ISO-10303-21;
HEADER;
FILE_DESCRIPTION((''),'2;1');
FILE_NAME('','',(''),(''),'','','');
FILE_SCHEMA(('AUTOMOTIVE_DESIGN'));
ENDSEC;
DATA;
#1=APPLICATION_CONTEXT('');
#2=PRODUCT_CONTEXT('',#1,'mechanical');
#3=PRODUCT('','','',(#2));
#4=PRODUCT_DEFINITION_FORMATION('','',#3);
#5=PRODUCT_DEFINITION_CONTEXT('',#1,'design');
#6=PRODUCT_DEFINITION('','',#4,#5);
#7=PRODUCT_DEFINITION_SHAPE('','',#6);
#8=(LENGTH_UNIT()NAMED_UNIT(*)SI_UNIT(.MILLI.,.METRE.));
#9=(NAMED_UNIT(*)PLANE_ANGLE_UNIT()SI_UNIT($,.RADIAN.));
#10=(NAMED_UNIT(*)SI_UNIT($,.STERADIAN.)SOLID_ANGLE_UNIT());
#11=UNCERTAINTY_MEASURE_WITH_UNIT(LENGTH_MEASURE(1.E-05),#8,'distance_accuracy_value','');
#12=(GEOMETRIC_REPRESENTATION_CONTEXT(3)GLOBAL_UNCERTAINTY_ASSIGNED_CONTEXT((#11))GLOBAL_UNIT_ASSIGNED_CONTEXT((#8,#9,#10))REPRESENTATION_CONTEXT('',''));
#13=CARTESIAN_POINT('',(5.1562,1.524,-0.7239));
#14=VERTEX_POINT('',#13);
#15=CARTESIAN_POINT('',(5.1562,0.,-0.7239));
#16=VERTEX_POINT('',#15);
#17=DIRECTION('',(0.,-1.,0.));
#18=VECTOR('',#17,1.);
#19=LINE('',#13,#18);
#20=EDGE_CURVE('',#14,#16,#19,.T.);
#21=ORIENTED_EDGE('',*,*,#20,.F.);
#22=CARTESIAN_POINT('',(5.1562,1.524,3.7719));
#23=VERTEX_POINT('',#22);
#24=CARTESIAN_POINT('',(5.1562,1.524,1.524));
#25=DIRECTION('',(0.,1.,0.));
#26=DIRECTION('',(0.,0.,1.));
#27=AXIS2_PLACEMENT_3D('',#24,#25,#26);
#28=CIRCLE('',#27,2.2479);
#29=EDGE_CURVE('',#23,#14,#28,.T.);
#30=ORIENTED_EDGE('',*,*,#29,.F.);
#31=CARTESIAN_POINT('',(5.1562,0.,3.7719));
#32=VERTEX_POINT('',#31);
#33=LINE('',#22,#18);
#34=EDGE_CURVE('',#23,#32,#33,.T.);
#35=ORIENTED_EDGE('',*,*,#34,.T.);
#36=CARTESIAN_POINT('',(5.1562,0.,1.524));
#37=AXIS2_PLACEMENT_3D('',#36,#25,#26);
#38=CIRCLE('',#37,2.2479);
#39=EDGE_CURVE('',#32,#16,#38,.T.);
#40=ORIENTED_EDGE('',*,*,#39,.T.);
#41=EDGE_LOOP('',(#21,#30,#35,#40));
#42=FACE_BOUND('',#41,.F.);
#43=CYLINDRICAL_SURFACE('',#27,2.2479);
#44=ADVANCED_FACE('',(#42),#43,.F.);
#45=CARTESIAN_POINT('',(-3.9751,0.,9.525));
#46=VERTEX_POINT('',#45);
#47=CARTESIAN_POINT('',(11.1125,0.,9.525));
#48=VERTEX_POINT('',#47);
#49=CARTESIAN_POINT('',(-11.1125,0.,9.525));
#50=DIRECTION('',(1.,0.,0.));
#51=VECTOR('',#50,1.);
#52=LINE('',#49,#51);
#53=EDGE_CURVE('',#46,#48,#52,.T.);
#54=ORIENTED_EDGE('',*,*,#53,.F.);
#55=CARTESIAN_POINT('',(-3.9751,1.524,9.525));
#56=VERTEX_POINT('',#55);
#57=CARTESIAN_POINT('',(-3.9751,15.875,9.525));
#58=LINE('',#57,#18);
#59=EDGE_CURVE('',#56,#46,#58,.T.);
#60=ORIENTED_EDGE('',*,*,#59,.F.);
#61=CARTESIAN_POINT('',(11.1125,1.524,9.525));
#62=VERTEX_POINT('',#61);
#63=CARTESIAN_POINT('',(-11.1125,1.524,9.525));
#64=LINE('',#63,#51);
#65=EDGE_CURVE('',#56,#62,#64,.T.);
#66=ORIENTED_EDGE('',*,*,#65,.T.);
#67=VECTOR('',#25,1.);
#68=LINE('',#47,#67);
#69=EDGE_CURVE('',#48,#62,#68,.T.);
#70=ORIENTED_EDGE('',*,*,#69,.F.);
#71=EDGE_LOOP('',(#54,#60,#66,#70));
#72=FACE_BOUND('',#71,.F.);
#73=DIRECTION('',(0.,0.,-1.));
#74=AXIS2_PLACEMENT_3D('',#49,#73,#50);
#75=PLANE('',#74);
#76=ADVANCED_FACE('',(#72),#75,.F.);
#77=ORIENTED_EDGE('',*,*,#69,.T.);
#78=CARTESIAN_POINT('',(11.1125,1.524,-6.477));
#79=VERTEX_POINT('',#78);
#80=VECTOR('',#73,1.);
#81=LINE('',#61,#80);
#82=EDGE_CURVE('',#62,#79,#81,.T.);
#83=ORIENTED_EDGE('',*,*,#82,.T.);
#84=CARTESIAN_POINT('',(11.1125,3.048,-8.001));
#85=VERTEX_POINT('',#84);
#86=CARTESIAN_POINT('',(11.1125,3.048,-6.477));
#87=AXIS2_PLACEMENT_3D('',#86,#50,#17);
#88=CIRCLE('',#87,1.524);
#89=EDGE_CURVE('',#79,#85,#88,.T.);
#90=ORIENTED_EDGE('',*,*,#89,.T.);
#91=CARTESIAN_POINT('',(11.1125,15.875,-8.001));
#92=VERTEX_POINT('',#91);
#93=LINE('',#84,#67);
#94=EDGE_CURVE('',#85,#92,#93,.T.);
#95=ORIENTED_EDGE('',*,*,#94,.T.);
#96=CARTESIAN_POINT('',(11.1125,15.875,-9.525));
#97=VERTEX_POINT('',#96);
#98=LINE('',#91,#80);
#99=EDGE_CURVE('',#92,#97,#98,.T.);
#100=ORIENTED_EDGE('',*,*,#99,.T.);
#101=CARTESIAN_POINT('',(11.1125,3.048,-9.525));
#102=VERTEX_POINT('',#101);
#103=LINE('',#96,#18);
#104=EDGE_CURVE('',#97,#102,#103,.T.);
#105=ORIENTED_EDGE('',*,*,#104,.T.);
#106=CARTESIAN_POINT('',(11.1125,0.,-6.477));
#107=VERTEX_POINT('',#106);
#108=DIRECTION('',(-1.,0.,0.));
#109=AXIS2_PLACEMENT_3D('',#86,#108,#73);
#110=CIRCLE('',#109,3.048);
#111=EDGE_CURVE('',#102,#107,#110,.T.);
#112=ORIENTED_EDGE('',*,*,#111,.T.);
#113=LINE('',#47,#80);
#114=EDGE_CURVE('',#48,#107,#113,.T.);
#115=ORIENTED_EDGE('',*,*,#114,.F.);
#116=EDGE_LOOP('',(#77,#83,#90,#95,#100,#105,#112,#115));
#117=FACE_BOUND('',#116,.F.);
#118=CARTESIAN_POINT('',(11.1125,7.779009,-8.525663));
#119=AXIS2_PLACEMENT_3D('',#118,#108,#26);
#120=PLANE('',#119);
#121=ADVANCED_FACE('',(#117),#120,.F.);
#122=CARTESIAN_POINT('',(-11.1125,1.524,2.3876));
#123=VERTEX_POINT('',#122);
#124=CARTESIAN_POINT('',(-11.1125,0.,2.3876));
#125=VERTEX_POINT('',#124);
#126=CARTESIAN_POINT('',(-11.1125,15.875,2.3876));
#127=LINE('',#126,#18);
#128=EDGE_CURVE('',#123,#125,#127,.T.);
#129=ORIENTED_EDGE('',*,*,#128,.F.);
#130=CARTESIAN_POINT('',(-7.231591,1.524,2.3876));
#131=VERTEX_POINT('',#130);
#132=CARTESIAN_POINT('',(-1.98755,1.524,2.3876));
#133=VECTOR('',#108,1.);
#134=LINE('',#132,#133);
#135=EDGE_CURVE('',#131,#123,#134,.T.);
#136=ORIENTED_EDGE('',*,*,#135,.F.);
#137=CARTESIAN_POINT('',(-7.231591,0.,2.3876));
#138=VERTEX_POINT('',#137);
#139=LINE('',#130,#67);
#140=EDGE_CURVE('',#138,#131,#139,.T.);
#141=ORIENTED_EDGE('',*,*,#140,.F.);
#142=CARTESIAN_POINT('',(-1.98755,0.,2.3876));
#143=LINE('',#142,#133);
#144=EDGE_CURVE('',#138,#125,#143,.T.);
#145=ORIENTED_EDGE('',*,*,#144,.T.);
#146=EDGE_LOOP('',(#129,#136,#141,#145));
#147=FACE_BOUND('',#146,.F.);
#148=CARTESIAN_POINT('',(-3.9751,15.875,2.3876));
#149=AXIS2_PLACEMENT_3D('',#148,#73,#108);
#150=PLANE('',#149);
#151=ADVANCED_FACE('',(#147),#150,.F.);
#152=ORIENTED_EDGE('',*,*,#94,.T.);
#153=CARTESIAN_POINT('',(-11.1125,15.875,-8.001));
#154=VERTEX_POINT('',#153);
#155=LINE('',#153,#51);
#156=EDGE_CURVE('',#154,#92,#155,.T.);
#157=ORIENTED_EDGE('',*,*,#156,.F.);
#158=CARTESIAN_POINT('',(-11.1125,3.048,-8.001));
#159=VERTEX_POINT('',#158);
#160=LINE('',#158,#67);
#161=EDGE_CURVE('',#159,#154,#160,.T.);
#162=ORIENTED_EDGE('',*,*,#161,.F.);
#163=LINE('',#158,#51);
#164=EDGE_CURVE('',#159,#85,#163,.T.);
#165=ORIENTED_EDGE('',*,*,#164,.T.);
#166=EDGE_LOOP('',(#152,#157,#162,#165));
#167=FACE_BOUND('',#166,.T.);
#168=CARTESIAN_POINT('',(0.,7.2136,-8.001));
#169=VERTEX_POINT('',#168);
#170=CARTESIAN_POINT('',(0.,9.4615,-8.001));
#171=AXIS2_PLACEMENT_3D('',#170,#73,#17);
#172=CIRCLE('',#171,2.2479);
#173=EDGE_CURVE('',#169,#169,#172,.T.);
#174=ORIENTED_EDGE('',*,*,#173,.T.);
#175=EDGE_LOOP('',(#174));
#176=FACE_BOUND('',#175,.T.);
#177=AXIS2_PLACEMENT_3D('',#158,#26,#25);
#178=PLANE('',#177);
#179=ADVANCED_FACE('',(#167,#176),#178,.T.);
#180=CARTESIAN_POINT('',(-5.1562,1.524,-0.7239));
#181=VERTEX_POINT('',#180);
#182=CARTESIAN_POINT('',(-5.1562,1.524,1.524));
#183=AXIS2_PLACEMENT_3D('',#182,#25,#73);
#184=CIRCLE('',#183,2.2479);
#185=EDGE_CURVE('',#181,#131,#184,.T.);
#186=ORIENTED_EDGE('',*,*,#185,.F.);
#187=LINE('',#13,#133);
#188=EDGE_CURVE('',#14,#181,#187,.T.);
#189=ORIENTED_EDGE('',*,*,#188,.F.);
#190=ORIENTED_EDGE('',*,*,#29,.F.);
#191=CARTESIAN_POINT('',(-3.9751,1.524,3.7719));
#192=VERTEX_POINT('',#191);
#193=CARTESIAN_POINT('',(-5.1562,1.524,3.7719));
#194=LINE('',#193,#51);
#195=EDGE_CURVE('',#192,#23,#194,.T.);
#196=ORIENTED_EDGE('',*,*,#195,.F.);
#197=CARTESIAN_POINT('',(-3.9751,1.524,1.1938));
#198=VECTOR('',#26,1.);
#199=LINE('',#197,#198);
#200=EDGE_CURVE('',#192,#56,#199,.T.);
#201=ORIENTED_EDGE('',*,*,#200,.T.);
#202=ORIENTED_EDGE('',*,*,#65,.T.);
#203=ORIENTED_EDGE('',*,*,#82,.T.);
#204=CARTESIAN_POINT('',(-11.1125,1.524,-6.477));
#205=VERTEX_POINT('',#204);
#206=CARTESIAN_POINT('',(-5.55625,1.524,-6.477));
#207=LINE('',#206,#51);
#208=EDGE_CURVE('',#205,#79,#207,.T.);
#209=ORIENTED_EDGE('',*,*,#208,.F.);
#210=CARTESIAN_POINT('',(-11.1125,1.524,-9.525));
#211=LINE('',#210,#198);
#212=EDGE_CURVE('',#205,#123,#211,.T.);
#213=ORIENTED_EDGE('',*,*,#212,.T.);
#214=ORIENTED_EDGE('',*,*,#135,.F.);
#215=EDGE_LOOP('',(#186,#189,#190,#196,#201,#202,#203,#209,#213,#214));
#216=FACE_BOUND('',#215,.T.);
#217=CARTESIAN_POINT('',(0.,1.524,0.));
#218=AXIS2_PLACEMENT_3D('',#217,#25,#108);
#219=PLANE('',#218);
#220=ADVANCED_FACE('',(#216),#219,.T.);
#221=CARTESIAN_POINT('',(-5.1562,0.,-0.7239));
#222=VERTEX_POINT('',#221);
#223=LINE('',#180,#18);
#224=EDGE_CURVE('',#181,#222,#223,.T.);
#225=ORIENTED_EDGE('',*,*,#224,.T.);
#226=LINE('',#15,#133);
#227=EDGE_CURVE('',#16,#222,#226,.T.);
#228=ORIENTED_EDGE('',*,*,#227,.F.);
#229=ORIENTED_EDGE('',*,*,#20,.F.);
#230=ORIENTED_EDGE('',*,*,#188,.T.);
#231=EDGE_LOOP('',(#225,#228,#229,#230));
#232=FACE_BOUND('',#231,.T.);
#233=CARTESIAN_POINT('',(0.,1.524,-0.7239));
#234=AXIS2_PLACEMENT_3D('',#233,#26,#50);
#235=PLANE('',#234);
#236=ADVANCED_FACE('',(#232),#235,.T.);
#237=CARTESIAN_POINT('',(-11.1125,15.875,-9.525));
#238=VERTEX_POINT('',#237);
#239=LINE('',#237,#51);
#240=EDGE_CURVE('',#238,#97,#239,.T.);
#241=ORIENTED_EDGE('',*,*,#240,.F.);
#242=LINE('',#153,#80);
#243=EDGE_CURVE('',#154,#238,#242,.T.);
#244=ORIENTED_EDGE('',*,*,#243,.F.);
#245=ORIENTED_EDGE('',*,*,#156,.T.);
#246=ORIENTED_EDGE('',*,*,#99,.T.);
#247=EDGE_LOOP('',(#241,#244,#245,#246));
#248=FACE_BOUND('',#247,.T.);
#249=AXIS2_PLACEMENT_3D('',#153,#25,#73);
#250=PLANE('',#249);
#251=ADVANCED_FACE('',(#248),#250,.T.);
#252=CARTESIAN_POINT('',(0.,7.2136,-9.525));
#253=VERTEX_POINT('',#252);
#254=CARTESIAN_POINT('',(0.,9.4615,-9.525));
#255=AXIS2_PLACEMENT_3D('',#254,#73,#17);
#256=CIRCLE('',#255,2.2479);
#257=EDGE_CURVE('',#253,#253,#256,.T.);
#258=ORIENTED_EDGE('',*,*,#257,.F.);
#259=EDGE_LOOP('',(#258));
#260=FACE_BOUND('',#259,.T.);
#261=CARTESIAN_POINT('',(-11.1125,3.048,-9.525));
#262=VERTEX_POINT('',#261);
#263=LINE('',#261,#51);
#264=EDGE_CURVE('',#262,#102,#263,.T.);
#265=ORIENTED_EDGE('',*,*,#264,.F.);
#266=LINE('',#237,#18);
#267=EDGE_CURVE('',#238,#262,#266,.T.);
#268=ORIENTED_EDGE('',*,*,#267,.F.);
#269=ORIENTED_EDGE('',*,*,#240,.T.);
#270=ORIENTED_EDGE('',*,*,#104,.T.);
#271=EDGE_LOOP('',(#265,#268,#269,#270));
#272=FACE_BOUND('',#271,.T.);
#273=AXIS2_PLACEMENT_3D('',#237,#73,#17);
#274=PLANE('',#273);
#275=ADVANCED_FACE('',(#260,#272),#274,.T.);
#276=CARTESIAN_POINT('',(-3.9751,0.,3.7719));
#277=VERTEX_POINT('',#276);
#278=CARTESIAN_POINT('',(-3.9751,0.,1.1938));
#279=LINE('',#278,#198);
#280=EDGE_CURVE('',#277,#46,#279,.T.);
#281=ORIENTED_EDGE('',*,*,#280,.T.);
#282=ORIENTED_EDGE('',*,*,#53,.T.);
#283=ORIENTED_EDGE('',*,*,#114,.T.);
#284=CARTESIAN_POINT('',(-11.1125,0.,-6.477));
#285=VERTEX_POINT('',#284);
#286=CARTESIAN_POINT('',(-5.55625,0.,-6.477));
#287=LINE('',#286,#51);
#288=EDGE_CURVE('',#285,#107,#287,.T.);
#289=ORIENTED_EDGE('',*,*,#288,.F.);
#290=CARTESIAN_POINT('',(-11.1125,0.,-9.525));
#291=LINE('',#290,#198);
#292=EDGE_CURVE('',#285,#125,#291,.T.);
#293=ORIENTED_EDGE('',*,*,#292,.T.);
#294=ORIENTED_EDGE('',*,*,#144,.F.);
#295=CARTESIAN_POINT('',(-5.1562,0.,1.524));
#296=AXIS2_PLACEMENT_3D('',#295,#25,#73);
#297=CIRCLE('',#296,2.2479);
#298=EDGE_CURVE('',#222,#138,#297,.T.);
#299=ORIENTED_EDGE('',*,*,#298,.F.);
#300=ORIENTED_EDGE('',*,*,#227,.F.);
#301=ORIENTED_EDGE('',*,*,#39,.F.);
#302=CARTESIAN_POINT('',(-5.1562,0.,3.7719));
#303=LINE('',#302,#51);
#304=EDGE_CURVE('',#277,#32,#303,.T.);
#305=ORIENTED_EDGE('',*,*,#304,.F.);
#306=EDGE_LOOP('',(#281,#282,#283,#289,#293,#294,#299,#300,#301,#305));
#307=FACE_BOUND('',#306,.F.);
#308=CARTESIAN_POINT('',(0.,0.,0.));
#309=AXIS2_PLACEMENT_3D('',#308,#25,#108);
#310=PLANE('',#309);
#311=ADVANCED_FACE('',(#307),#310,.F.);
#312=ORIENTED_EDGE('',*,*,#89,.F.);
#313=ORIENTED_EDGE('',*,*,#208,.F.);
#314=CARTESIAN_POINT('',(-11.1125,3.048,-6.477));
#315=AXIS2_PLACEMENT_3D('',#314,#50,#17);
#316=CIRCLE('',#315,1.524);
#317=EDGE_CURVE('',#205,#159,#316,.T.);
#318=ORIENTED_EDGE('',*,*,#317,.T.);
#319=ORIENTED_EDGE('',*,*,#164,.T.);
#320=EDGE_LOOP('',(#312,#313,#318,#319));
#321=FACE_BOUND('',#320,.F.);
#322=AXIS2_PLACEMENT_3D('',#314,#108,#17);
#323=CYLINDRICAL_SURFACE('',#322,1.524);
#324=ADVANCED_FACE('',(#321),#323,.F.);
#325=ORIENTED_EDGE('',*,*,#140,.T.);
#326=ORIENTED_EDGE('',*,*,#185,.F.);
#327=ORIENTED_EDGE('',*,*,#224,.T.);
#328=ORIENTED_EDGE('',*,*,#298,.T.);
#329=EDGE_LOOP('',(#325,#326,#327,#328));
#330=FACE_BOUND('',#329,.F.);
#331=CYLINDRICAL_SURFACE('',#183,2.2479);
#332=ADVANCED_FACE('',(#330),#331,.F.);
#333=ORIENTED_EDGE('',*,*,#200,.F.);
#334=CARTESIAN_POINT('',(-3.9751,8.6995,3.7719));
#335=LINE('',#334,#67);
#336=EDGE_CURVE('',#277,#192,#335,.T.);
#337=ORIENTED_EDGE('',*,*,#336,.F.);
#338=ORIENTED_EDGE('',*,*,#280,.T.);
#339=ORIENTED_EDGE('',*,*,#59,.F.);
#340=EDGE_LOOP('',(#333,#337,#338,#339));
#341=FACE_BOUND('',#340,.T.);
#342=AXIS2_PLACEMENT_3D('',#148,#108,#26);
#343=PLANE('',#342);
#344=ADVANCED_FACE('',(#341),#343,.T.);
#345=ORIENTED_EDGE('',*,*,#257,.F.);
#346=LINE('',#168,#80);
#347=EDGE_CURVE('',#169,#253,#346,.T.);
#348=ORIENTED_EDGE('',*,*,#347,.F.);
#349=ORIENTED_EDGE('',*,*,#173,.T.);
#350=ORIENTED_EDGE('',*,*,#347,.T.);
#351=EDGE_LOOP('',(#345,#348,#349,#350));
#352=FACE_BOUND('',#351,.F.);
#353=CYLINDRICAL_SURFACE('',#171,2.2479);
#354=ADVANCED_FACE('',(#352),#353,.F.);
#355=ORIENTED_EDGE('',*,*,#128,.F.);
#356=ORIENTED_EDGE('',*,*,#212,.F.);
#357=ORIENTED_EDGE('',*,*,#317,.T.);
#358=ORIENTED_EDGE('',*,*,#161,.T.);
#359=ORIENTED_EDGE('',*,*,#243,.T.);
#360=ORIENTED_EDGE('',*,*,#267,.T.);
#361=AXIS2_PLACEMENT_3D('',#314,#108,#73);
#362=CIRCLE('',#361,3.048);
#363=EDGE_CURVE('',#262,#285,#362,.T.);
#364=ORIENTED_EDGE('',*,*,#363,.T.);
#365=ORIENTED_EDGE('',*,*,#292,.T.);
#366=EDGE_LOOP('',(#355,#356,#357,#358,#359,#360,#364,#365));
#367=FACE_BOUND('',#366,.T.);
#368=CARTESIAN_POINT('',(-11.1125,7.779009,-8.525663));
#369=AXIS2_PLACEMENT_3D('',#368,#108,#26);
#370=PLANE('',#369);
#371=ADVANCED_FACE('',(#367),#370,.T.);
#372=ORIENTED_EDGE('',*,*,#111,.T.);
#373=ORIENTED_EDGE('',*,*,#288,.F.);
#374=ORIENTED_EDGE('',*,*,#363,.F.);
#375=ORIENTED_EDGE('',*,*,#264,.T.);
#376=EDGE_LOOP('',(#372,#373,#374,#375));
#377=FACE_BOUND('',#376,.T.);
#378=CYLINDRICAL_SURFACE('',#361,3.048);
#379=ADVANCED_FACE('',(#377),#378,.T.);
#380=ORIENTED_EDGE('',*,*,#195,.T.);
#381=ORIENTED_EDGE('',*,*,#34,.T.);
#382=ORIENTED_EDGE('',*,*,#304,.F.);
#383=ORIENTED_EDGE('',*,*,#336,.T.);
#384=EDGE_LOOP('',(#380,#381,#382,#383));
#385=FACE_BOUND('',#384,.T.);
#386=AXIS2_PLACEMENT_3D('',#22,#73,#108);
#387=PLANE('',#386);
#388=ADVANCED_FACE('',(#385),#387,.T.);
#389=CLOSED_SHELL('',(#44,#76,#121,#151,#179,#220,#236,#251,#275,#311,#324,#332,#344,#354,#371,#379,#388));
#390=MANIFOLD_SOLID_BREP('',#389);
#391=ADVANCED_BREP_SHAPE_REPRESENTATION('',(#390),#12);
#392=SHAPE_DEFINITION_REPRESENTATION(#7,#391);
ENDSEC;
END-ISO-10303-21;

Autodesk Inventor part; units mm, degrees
ref_plane "YZ Plane" through (0, 0, 0) normal (1, 0, 0) x (0, 1, 0)
ref_plane "XZ Plane" through (0, 0, 0) normal (0, 1, 0) x (-1, 0, 0)
ref_plane "XY Plane" through (0, 0, 0) normal (0, 0, 1) x (1, 0, 0)
sketch "Sketch1" plane through (0, 0, 0) normal (0, 1, 0) x (-1, 0, 0)
  line L0 (11.1125, 9.525) -> (-11.1125, 9.525)
  line L1 (-11.1125, 9.525) -> (-11.1125, -9.525)
  line L2 (-11.1125, -9.525) -> (11.1125, -9.525)
  line L3 (11.1125, -9.525) -> (11.1125, 9.525)
  line L4 (11.1125, 9.525) -> (-11.1125, -9.525) construction
  line L5 (-11.1125, 9.525) -> (11.1125, -9.525) construction
  point P0 (0, 0)
  dimension "d0" = 22.225
  dimension "d1" = 19.05
extrude "Plate1" add sketch "Sketch1" along normal blind 1.524
sketch "Sketch2" plane through (-11.1125, 0, -8.001) normal (0, 0, -1) x (-1, 0, 0)
  line L0 (-22.225, 0) -> (0, 0)
  line L1 (0, 0) -> (0, 15.875)
  line L2 (0, 15.875) -> (-22.225, 15.875)
  line L3 (-22.225, 15.875) -> (-22.225, 0)
edge flange "Flange1" height 15.875 angle 90 thickness 1.524 bend radius 1.524 thickness toward (0, 0, -1) relief tear relief width 1.524 relief depth 0.762 edges at (0, 1.524, -9.525) wall of the first edge with corners at (11.1125, 0, -8.001) (-11.1125, 0, -8.001) (-11.1125, 15.875, -8.001) (11.1125, 15.875, -8.001)
bend "Bend1"
corner "Corner1"
sketch "Sketch3" plane through (0, 1.524, 0) normal (0, 1, 0) x (1, 0, 0)
  line L0 (11.1125, 6.477) -> (-11.1125, 6.477) projected
  line L1 (-11.1125, -9.525) -> (-11.1125, 6.477) projected
  line L2 (11.1125, -9.525) -> (-11.1125, -9.525) projected
  line L3 (11.1125, 6.477) -> (11.1125, -9.525) projected
  line L4 (-11.1125, -1.524) -> (11.1125, -1.524) construction
  line L5 (0, 6.477) -> (0, -9.525) construction
  circle A0 centre (0, -1.524) radius 2.2479
  line L6 (-5.1562, -1.524) -> (5.1562, -1.524) construction
  line L7 (-5.1562, 0.7239) -> (5.1562, 0.7239)
  line L8 (5.1562, -3.7719) -> (-5.1562, -3.7719)
  arc A1 (-5.1562, 0.7239) -> (-5.1562, -3.7719) centre (-5.1562, -1.524) ccw
  arc A2 (5.1562, -3.7719) -> (5.1562, 0.7239) centre (5.1562, -1.524) ccw
  point P0 (0, 0)
  dimension "d13" = 16.002
  dimension "d14" = 22.225
  dimension "d24" = 4.4958
  dimension "d25" = 3.7084
sketch "Sketch4" plane through (-11.1125, 15.875, -8.001) normal (0, 0, 1) x (1, 0, 0)
  line L0 (0, -12.827) -> (22.225, -12.827) projected
  line L1 (22.225, 0) -> (22.225, -12.827) projected
  line L2 (22.225, 0) -> (0, 0) projected
  line L3 (0, 0) -> (0, -12.827) projected
  line L4 (0, -6.4135) -> (22.225, -6.4135) construction
  line L5 (22.225, 0) -> (22.225, -12.827) construction
  line L6 (11.1125, -12.827) -> (11.1125, 0) construction
  line L7 (22.225, 0) -> (0, 0) construction
  point P0 (11.1125, -15.875)
  point P1 (11.1125, -6.4135)
  dimension "d15" = 22.225
  dimension "d16" = 12.827
hole "Hole1" at (0, 9.4615, -8.001) direction (0, 0, -1) diameter 4.4958 depth 1.524 tip angle 118 clearance for "Flat Head Machine Screw (82)" size "#8" standard "Ansi Unified Screw Threads"
extrude "Cut1" cut sketch "Sketch3" against normal blind 1.524 contours A0 | A0 L7 A2 L8 | A0 L8 A1 L7
sketch "Sketch7" plane through (11.1125, 15.875, -9.525) normal (0, 0, -1) x (-1, 0, 0)
  line L0 (0, 0) -> (22.225, 0) projected
  line L1 (22.225, -15.875) -> (0, -15.875) projected
  line L2 (0, -12.827) -> (22.225, -12.827) projected
  point P0 (11.1125, -15.875)
  dimension "d28" = 15.875
  dimension "d29" = 12.827
  dimension "d30" = 22.225
sketch "Sketch8" plane through (0, 0, 0) normal (0, -1, 0) x (1, 0, 0)
  arc A0 (-5.1562, 3.7719) -> (-5.1562, -0.7239) centre (-5.1562, 1.524) ccw projected
  line L0 (-5.1562, 3.7719) -> (5.1562, 3.7719) projected
  arc A1 (5.1562, -0.7239) -> (5.1562, 3.7719) centre (5.1562, 1.524) ccw projected
  line L1 (5.1562, -0.7239) -> (-5.1562, -0.7239) projected
  line L2 (-11.1125, -6.477) -> (11.1125, -6.477) projected
  line L3 (11.1125, 9.525) -> (11.1125, -6.477) projected
  line L4 (-11.1125, 9.525) -> (11.1125, 9.525) projected
  line L5 (-11.1125, -6.477) -> (-11.1125, 9.525) projected
  line L6 (11.1125, -9.525) -> (-11.1125, -9.525) projected
  line L7 (11.1125, -6.477) -> (11.1125, -9.525) projected
  line L8 (-11.1125, -6.477) -> (11.1125, -6.477) projected
  line L9 (-11.1125, -9.525) -> (-11.1125, -6.477) projected
  point P0 (0, 0)
  dimension "d31" = 19.05
  dimension "d32" = 16.002
sketch "Sketch9" plane through (0, 1.524, 0) normal (0, 1, 0) x (1, 0, 0)
  arc A0 (5.1562, -3.7719) -> (5.1562, 0.7239) centre (5.1562, -1.524) ccw projected
  arc A1 (-5.1562, 0.7239) -> (-5.1562, -3.7719) centre (-5.1562, -1.524) ccw projected
  line L0 (5.1562, -3.7719) -> (-5.1562, -3.7719) projected
  line L1 (-5.1562, 0.7239) -> (5.1562, 0.7239) projected
  circle A2 centre (0, -1.524) radius 2.2479
  point P0 (0, 0)
  dimension "d34" = 5.1562
sketch "Sketch10" plane through (-11.1125, 15.875, -9.525) normal (0, 1, 0) x (1, 0, 0)
  line L0 (22.225, -19.05) -> (0, -19.05) projected
  line L1 (22.225, 0) -> (0, 0) projected
  line L2 (0, -1.524) -> (0, 0) projected
  line L3 (0, -1.524) -> (0, -3.048) projected
  line L4 (0, -19.05) -> (0, -3.048) projected
  line L5 (0, 0) -> (7.1374, 0)
  line L6 (7.1374, 0) -> (7.1374, -19.05)
  line L7 (7.1374, -19.05) -> (0, -19.05)
  line L8 (0, -19.05) -> (0, 0)
  line L9 (22.225, 0) -> (15.0876, 0)
  line L10 (15.0876, 0) -> (15.0876, -19.05)
  line L11 (15.0876, -19.05) -> (22.225, -19.05)
  line L12 (22.225, -19.05) -> (22.225, 0)
  line L13 (0, -19.05) -> (22.225, -19.05)
  line L14 (22.225, -19.05) -> (22.225, -11.9126)
  line L15 (22.225, -11.9126) -> (0, -11.9126)
  line L16 (0, -11.9126) -> (0, -19.05)
  line L17 (0, -19.05) -> (7.1374, -19.05)
  line L18 (7.1374, -19.05) -> (7.1374, -11.9126)
  line L19 (7.1374, -11.9126) -> (0, -11.9126)
  line L20 (0, -11.9126) -> (0, -19.05)
  line L21 (22.225, -19.05) -> (15.0876, -19.05)
  line L22 (15.0876, -19.05) -> (15.0876, -11.9126)
  line L23 (15.0876, -11.9126) -> (22.225, -11.9126)
  line L24 (22.225, -11.9126) -> (22.225, -19.05)
  point P0 (11.1125, -9.525)
  dimension "d35" = 7.1374
  dimension "d36" = 7.1374
  dimension "d39" = 7.1374
extrude "Cut3" cut sketch "Sketch10" against normal through all contours L0 L4 L15 L6
equation "\"d22\" = Thickness"
equation "\"d26\" = Thickness"
equation "\"d36\" = d35"
equation "\"d40\" = Thickness"
equation "\"d3\" = BendReliefWidth"
equation "\"d4\" = BendReliefDepth"
equation "\"d5\" = MinimumRemnant"
equation "\"d6\" = BendRadius"
equation "\"d9\" = BendRadius"
equation "\"d10\" = CornerReliefSize"
equation "\"d11\" = GapSize"
equation "\"d12\" = JacobiRadiusSize"
equation "\"BendRadius\" = Thickness"
equation "\"BendReliefWidth\" = Thickness"
equation "\"BendReliefDepth\" = 0.5 * Thickness"
equation "\"CornerReliefSize\" = 4 * Thickness"
equation "\"MinimumRemnant\" = 2 * Thickness"
equation "\"TransitionRadius\" = BendRadius"
equation "\"JacobiRadiusSize\" = BendRadius"
equation "\"GapSize\" = Thickness"
equation "\"d2\" = BendRadius"
equation "\"Thickness\" = 1.524"
properties part number "Bracket (15275A53)_LeftCut" material "Steel"
